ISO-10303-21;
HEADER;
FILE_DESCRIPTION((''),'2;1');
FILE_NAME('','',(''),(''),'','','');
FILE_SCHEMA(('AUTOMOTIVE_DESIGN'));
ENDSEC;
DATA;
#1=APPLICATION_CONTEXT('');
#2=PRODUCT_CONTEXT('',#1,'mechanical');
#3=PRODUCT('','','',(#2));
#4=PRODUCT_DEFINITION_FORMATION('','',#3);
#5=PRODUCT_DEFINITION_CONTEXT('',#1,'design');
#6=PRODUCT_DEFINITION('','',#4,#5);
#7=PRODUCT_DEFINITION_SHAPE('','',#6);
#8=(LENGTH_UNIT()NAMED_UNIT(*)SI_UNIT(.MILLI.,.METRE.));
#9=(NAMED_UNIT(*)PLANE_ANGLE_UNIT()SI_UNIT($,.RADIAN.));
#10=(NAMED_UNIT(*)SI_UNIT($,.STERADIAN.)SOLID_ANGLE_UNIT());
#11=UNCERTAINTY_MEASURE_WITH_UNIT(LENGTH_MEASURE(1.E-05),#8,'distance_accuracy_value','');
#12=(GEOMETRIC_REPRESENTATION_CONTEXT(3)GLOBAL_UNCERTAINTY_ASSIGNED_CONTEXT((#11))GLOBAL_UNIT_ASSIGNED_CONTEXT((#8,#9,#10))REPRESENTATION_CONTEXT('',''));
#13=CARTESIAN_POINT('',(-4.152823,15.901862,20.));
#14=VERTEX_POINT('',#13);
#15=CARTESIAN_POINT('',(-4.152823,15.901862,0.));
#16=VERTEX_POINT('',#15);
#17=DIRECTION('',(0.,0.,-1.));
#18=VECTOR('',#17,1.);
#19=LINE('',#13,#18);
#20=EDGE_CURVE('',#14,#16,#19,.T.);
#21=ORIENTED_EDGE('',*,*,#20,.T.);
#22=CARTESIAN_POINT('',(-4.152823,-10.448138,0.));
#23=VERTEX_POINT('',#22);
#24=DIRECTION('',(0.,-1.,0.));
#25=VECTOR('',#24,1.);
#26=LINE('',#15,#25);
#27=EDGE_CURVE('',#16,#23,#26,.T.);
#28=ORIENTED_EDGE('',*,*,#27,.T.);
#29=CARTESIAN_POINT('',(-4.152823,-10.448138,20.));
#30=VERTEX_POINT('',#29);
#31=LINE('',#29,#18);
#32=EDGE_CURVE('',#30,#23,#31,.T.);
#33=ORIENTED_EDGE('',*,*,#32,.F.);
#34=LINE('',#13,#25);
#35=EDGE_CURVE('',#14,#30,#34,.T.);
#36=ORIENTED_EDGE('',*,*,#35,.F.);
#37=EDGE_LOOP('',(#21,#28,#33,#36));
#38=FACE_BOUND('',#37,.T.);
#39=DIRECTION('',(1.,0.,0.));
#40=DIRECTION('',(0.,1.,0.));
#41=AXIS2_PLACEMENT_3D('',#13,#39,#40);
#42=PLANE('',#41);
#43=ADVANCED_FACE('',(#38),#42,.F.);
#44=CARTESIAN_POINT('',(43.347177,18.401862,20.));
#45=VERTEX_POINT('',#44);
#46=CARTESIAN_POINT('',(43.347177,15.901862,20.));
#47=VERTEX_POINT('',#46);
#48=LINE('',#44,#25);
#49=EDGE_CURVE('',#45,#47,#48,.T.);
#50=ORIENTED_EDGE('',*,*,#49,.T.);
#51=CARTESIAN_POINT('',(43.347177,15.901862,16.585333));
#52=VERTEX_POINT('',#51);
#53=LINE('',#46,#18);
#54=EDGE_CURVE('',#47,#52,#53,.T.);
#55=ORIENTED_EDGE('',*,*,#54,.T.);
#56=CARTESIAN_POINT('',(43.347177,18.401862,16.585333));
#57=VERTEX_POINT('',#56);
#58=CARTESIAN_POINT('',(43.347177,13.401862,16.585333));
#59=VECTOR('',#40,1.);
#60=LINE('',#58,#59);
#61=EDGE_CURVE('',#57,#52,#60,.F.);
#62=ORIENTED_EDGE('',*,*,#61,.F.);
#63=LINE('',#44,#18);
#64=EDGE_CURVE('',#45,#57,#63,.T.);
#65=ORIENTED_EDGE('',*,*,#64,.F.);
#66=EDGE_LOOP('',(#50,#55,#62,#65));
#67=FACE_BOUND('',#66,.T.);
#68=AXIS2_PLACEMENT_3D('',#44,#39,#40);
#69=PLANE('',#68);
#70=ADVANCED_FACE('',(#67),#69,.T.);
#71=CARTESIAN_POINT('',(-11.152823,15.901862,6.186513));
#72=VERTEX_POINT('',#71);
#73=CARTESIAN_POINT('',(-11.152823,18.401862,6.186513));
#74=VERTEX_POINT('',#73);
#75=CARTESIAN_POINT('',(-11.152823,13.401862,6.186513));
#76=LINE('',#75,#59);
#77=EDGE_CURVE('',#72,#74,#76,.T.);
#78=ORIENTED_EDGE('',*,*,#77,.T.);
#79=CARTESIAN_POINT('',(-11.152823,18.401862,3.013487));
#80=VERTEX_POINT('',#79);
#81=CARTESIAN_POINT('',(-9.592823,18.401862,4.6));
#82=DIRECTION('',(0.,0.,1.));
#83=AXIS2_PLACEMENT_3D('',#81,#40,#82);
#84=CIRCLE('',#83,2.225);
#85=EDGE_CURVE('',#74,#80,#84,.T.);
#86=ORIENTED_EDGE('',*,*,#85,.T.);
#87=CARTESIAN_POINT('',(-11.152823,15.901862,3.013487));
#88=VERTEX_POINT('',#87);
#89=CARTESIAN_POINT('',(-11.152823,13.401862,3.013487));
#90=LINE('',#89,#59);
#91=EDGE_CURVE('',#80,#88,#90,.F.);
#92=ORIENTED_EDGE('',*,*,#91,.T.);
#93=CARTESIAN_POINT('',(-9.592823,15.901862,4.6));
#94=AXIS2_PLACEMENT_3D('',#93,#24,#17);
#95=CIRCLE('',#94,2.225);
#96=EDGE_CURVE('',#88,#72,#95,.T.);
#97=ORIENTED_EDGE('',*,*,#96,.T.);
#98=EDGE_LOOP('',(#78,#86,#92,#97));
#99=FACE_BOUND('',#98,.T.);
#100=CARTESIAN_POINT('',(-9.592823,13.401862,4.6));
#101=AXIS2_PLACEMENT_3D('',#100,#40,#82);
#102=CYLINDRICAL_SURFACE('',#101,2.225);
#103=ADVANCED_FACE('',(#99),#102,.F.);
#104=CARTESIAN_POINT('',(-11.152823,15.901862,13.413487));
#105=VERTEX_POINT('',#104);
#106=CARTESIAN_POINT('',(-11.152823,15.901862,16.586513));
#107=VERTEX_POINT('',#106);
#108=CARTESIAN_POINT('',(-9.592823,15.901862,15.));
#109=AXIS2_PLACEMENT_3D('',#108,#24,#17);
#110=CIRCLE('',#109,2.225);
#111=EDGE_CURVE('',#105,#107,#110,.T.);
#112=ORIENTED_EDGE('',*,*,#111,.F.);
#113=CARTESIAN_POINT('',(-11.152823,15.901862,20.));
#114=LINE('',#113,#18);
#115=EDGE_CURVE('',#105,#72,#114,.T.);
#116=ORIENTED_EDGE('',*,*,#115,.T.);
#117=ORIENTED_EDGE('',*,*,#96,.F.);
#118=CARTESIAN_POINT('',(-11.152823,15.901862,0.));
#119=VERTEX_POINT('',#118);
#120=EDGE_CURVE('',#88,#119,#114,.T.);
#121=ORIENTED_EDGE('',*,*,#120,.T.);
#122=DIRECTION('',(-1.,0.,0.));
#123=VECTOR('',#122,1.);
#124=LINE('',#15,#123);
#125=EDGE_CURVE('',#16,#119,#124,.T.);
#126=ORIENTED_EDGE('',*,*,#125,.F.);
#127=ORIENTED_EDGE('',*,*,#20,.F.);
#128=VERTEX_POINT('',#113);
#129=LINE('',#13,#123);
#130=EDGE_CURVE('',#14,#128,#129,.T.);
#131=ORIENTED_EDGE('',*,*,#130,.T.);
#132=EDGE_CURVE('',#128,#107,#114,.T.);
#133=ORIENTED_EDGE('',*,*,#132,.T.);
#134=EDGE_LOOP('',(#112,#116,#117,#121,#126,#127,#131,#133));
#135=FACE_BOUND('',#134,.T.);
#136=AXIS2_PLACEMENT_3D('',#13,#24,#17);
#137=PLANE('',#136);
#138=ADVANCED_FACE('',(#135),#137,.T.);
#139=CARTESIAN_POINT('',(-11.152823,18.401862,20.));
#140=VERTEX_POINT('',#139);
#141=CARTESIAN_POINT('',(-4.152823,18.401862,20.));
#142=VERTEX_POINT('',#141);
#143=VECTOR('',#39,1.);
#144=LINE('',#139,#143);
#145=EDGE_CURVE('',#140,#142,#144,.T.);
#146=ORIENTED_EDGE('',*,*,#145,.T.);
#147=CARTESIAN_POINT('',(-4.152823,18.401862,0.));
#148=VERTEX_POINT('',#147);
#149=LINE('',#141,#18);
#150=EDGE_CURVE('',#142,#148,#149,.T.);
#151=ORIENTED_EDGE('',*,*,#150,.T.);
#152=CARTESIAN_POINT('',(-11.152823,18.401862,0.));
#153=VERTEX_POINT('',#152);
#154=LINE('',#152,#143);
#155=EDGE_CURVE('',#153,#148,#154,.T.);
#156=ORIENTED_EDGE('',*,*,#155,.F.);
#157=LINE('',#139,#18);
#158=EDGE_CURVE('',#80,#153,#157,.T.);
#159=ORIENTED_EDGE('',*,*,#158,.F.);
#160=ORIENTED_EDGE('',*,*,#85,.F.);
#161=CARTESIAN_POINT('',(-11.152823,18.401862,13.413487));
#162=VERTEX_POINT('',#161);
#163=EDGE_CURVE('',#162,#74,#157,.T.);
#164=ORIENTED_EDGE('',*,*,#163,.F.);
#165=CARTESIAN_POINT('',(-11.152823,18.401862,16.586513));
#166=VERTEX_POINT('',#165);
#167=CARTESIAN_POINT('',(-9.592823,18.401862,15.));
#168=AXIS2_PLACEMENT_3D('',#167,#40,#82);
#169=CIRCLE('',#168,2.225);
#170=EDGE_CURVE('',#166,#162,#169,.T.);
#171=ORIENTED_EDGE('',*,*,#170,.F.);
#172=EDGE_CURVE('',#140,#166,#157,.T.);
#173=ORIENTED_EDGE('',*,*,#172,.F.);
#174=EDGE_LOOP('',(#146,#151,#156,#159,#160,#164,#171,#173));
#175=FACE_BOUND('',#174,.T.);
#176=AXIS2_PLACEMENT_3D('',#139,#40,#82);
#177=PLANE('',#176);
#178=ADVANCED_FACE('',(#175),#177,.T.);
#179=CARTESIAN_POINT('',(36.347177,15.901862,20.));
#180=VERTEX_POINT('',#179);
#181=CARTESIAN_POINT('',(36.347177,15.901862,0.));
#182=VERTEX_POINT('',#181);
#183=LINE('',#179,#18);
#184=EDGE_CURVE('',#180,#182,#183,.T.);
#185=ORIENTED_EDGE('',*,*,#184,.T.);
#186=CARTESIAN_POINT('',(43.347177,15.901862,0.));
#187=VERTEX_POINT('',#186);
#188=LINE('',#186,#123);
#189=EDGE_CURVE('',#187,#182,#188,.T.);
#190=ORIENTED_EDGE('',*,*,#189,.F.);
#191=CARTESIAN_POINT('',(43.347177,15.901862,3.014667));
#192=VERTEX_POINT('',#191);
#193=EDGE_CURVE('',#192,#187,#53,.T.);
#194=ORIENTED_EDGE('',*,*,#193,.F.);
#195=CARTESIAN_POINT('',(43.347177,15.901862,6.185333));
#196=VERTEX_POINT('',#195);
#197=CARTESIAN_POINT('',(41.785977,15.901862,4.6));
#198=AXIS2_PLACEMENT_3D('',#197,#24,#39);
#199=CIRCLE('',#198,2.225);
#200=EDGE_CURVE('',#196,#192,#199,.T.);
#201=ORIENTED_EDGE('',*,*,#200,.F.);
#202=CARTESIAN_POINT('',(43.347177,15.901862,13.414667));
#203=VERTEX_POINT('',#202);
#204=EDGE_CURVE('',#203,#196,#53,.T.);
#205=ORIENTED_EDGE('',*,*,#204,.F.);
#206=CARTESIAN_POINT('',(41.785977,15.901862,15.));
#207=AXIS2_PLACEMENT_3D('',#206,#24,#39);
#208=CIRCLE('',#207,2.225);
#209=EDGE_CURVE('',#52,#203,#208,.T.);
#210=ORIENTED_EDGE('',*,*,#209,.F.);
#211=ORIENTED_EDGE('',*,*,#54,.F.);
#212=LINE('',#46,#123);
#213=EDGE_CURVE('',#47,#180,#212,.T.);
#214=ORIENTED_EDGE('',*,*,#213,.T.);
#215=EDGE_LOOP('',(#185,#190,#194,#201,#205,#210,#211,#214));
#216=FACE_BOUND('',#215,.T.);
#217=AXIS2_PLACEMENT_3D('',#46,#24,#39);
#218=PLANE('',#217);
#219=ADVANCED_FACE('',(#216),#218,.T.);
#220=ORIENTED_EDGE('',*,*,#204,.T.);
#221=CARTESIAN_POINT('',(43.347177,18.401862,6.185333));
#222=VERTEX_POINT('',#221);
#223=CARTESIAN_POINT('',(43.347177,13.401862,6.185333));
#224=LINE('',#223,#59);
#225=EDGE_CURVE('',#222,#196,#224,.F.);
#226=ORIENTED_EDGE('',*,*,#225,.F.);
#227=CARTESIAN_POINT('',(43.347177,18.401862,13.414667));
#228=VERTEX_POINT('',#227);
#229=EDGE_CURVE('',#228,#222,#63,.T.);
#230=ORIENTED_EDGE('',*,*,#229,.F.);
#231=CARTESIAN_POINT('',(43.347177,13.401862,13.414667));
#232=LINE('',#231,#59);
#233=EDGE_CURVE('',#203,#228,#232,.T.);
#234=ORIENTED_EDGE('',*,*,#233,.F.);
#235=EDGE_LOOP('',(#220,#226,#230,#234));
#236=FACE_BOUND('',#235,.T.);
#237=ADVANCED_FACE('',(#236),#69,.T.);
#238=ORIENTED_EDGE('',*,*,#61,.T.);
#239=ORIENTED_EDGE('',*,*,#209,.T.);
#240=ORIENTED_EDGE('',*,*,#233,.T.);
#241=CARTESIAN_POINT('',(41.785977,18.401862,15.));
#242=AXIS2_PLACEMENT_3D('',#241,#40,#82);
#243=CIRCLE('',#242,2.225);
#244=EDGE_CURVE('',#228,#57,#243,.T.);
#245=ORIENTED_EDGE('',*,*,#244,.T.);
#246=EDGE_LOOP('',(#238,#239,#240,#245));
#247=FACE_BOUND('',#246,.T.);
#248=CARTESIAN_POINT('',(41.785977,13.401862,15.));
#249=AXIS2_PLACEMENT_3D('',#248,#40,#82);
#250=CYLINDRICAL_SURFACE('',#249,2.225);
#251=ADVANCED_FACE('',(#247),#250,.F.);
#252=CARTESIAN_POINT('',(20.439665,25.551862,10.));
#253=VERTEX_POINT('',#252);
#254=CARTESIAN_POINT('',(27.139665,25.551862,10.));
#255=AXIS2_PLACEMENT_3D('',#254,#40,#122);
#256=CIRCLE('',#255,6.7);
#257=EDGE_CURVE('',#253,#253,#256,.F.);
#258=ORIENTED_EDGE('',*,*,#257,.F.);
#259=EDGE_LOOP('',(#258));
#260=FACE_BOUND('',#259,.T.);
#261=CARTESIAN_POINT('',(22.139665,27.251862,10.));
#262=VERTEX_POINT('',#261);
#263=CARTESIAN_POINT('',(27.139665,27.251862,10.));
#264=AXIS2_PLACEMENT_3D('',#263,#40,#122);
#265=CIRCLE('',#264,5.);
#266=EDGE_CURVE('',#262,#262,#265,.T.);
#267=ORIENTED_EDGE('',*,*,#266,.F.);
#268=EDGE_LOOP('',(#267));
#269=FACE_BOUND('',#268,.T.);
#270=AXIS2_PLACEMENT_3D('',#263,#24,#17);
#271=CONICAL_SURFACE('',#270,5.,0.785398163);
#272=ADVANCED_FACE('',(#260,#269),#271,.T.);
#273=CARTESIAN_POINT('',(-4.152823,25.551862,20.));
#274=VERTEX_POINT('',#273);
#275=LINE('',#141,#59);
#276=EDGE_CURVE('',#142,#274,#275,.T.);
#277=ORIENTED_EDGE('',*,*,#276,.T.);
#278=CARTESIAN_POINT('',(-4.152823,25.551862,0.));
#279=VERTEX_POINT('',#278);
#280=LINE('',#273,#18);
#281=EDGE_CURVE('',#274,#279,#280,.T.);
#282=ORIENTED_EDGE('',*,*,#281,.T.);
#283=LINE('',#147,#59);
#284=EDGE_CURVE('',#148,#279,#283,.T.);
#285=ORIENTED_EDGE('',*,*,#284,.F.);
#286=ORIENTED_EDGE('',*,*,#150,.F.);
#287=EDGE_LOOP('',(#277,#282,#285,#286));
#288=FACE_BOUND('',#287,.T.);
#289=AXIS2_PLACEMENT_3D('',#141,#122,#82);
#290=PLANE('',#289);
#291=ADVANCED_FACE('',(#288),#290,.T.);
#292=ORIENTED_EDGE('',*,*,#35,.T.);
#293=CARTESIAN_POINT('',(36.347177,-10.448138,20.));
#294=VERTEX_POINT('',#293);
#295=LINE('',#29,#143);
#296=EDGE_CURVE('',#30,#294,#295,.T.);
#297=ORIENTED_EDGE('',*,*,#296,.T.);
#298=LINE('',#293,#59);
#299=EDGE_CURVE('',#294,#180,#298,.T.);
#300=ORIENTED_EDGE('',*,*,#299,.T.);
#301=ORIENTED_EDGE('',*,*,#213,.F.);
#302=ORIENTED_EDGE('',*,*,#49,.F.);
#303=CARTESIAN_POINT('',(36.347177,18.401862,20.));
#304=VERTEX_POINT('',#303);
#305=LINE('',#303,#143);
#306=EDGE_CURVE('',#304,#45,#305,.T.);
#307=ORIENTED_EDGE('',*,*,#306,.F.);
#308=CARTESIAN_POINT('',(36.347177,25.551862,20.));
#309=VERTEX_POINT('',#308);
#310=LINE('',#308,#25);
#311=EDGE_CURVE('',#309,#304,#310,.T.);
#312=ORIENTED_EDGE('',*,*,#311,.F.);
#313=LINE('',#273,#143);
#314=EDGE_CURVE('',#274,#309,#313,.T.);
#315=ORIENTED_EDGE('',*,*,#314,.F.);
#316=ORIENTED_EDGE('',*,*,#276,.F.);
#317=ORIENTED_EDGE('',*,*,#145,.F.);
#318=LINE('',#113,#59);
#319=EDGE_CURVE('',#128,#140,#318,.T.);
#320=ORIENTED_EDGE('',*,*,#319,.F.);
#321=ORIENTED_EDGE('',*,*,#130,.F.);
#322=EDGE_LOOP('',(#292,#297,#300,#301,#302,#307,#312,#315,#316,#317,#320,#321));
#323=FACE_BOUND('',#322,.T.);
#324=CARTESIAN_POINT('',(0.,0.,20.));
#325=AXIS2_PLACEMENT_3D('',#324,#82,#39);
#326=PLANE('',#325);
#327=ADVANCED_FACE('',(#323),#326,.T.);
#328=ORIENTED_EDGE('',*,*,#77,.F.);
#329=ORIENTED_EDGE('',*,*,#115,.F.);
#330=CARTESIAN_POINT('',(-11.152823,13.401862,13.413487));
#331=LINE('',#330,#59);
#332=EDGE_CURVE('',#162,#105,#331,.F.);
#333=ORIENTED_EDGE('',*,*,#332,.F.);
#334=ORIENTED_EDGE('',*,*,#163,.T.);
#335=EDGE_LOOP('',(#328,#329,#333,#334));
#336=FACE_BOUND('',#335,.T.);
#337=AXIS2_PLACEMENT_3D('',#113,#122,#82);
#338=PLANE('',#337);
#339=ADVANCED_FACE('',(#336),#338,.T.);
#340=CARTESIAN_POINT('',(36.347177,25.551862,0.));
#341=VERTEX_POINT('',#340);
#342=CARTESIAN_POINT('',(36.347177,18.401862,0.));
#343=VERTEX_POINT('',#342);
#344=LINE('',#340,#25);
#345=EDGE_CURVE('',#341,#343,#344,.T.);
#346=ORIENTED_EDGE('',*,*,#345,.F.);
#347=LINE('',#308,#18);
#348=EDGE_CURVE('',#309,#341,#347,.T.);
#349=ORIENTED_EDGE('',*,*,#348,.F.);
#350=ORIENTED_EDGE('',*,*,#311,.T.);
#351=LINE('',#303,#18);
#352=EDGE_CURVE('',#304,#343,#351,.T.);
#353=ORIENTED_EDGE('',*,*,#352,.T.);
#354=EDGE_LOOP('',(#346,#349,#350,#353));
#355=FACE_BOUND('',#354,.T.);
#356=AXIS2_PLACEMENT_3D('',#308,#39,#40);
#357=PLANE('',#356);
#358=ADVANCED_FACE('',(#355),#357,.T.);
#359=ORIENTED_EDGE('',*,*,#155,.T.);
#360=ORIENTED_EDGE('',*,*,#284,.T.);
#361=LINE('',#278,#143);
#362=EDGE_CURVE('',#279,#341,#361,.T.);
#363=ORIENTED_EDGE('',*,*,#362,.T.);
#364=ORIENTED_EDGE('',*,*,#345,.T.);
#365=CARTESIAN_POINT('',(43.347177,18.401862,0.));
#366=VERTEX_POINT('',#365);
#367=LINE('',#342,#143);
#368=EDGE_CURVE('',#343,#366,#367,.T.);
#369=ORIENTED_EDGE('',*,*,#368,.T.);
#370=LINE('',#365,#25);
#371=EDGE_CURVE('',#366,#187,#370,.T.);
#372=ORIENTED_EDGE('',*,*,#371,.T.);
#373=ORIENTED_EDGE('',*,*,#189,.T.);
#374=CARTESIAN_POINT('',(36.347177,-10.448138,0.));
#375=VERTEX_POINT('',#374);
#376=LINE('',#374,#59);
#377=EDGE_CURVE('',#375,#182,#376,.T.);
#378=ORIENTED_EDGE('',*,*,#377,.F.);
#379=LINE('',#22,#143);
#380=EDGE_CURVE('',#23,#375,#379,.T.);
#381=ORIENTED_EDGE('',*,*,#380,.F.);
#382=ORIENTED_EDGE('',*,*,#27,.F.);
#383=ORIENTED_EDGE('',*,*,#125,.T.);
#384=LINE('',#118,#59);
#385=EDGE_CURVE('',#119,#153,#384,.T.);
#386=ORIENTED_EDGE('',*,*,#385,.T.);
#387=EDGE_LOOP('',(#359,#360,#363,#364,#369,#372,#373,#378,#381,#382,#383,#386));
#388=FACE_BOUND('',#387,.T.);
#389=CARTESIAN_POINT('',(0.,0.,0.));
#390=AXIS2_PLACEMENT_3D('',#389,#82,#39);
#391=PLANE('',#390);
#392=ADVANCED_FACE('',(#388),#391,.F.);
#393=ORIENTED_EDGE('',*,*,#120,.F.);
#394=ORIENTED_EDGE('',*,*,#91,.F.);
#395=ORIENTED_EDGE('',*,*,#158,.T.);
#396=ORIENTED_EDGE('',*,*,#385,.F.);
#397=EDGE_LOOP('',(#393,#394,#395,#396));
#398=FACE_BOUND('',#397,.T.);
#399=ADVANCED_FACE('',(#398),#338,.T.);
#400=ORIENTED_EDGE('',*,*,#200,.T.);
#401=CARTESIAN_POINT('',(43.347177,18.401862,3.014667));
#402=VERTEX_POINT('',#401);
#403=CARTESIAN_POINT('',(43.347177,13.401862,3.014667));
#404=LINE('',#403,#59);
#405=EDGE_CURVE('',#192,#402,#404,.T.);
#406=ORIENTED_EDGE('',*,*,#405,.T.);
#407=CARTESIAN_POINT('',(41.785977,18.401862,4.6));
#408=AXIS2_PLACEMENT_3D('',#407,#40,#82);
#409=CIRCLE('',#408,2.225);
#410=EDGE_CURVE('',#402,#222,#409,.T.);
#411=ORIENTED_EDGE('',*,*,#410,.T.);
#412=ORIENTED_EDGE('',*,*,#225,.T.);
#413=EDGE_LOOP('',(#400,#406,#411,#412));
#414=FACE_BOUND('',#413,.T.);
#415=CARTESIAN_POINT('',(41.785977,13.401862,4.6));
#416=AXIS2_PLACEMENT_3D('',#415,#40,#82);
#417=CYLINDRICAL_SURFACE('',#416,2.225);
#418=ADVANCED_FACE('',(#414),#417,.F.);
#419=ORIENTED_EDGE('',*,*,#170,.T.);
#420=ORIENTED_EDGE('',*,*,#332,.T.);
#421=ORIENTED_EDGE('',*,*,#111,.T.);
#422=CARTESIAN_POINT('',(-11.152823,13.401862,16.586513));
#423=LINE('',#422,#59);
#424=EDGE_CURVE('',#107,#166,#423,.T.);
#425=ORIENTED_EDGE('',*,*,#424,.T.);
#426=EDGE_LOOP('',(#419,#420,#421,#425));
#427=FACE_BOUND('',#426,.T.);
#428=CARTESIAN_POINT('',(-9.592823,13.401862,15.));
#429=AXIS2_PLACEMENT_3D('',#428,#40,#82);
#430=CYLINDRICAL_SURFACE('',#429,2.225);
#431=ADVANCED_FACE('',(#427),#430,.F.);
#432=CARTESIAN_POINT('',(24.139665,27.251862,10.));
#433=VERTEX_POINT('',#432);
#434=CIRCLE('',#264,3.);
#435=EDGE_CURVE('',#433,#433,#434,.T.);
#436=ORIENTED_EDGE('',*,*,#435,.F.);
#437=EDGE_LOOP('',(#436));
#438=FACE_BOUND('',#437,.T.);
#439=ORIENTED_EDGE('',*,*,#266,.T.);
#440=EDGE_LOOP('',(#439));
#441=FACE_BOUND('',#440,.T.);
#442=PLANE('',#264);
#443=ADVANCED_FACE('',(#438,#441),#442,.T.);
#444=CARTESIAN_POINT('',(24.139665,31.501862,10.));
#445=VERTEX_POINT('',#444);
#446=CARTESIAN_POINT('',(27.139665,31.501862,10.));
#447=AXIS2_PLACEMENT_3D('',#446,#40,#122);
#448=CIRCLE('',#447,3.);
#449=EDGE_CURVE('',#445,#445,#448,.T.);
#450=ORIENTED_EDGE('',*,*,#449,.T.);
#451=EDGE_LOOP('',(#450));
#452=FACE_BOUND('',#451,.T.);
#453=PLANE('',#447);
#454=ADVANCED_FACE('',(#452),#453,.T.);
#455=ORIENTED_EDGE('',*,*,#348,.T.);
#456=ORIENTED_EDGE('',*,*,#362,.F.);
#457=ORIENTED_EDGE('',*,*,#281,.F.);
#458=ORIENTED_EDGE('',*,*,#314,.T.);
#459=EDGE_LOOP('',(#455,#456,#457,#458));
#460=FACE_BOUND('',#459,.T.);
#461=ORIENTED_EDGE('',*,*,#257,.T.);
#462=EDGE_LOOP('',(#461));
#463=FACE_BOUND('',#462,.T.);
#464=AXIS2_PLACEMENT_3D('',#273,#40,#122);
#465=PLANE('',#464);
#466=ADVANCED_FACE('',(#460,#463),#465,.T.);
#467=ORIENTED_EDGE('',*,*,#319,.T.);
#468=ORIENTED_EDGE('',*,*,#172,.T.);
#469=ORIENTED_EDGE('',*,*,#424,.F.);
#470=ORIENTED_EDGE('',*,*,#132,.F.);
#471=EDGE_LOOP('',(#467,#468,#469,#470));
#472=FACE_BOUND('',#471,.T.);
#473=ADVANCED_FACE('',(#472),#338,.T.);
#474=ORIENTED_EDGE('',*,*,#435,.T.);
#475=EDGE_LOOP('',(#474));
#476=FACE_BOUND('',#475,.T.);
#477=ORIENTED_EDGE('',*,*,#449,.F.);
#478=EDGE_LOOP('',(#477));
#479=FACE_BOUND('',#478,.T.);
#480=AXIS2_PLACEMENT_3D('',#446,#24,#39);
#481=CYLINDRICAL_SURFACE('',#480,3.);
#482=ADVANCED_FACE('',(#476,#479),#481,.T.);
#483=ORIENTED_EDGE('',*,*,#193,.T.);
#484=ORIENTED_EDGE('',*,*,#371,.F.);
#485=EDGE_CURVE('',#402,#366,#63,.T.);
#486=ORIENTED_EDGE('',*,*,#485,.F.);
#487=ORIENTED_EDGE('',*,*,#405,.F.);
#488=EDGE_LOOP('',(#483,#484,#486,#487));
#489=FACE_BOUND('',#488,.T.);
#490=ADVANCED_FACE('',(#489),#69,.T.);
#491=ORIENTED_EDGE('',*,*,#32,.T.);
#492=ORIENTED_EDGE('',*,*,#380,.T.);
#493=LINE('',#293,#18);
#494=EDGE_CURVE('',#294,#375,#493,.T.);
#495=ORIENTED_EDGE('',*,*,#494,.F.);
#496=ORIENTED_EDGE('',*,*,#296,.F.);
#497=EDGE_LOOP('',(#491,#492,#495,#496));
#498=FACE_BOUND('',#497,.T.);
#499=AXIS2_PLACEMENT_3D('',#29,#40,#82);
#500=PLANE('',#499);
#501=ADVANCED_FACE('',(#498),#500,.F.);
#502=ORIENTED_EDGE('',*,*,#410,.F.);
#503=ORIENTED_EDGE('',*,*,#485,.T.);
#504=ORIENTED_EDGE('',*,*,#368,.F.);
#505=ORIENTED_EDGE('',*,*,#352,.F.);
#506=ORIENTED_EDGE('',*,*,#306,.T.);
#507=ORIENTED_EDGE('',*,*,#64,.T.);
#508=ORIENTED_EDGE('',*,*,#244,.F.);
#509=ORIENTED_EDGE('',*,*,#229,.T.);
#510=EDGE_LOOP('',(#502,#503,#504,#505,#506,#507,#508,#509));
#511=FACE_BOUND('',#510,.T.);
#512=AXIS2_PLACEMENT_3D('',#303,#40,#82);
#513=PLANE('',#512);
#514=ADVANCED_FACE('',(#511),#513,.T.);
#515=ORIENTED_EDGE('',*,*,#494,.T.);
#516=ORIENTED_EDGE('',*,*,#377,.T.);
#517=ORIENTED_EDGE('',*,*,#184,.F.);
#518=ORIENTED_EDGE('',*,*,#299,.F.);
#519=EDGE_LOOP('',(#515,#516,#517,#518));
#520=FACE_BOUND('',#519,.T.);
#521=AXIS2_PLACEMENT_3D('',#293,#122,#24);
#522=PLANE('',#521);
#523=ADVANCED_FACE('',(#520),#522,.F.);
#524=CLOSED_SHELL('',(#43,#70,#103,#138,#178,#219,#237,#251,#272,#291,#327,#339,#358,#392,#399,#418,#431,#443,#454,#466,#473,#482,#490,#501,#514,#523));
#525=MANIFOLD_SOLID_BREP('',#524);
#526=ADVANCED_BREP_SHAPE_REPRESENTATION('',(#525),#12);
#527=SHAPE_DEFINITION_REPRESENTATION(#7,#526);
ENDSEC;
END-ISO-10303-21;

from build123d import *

# Parameters (mm, degrees)
EXTRUDE_1_DEPTH     = 20
SKETCH_2_R          = 2.225
CUT_EXTRUDE_4_DEPTH = 5
SKETCH_3_R          = 2.225
CUT_EXTRUDE_5_DEPTH = 5
SKETCH_4_R          = 5
EXTRUDE_3_DEPTH     = 1.7
CHAMFER_3_SIZE      = 1.7
SKETCH_5_R          = 3
EXTRUDE_4_DEPTH     = 4.25


with BuildPart() as part:
    # 草圖1 → 填料-伸長1 (new body)
    with BuildSketch(Plane.XY):
        Polygon((-4.152823353, 15.901861702), (-4.152823353, -10.448138298), (36.347176647, -10.448138298), (36.347176647, 15.901861702), (43.347176647, 15.901861702), (43.347176647, 18.401861702), (36.347176647, 18.401861702), (36.347176647, 25.551861702), (-4.152823353, 25.551861702), (-4.152823353, 18.401861702), (-11.152823353, 18.401861702), (-11.152823353, 15.901861702), align=None)
    extrude(amount=EXTRUDE_1_DEPTH)

    # 草圖2 → 除料-伸長4 (cut)
    with BuildSketch(Plane(origin=(0, 18.401861702, 0), x_dir=(1, 0, 0), z_dir=(0, 1, 0))):
        with Locations((41.785976647, -4.6)):
            Circle(SKETCH_2_R)
        with Locations((41.785976647, -15)):
            Circle(SKETCH_2_R)
    extrude(amount=-CUT_EXTRUDE_4_DEPTH, mode=Mode.SUBTRACT)

    # 草圖3 → 除料-伸長5 (cut)
    with BuildSketch(Plane(origin=(0, 18.401861702, 0), x_dir=(1, 0, 0), z_dir=(0, 1, 0))):
        with Locations((-9.592823353, -4.6)):
            Circle(SKETCH_3_R)
        with Locations((-9.592823353, -15)):
            Circle(SKETCH_3_R)
    extrude(amount=-CUT_EXTRUDE_5_DEPTH, mode=Mode.SUBTRACT)

    # 草圖4 → 填料-伸長3 (add)
    with BuildSketch(Plane(origin=(0, 25.551861702, 0), x_dir=(1, 0, 0), z_dir=(0, 1, 0))):
        with Locations(Location((27.139664618, -10, 0), (0, 0, 180))):
            Circle(SKETCH_4_R)
    extrude(amount=EXTRUDE_3_DEPTH)

    # 導角3
    chamfer_3_edges = [part.edges().sort_by_distance(p)[0] for p in [
        (32.139664618, 25.551861702, 10),
    ]]
    chamfer(chamfer_3_edges, length=CHAMFER_3_SIZE - 0.0001)  # a hair under: the kernel refuses the full size

    # 草圖5 → 填料-伸長4 (add)
    with BuildSketch(Plane(origin=(0, 27.251861702, 0), x_dir=(1, 0, 0), z_dir=(0, 1, 0))):
        with Locations(Location((27.139664618, -10, 0), (0, 0, 180))):
            Circle(SKETCH_5_R)
    extrude(amount=EXTRUDE_4_DEPTH)


solid = part.part
